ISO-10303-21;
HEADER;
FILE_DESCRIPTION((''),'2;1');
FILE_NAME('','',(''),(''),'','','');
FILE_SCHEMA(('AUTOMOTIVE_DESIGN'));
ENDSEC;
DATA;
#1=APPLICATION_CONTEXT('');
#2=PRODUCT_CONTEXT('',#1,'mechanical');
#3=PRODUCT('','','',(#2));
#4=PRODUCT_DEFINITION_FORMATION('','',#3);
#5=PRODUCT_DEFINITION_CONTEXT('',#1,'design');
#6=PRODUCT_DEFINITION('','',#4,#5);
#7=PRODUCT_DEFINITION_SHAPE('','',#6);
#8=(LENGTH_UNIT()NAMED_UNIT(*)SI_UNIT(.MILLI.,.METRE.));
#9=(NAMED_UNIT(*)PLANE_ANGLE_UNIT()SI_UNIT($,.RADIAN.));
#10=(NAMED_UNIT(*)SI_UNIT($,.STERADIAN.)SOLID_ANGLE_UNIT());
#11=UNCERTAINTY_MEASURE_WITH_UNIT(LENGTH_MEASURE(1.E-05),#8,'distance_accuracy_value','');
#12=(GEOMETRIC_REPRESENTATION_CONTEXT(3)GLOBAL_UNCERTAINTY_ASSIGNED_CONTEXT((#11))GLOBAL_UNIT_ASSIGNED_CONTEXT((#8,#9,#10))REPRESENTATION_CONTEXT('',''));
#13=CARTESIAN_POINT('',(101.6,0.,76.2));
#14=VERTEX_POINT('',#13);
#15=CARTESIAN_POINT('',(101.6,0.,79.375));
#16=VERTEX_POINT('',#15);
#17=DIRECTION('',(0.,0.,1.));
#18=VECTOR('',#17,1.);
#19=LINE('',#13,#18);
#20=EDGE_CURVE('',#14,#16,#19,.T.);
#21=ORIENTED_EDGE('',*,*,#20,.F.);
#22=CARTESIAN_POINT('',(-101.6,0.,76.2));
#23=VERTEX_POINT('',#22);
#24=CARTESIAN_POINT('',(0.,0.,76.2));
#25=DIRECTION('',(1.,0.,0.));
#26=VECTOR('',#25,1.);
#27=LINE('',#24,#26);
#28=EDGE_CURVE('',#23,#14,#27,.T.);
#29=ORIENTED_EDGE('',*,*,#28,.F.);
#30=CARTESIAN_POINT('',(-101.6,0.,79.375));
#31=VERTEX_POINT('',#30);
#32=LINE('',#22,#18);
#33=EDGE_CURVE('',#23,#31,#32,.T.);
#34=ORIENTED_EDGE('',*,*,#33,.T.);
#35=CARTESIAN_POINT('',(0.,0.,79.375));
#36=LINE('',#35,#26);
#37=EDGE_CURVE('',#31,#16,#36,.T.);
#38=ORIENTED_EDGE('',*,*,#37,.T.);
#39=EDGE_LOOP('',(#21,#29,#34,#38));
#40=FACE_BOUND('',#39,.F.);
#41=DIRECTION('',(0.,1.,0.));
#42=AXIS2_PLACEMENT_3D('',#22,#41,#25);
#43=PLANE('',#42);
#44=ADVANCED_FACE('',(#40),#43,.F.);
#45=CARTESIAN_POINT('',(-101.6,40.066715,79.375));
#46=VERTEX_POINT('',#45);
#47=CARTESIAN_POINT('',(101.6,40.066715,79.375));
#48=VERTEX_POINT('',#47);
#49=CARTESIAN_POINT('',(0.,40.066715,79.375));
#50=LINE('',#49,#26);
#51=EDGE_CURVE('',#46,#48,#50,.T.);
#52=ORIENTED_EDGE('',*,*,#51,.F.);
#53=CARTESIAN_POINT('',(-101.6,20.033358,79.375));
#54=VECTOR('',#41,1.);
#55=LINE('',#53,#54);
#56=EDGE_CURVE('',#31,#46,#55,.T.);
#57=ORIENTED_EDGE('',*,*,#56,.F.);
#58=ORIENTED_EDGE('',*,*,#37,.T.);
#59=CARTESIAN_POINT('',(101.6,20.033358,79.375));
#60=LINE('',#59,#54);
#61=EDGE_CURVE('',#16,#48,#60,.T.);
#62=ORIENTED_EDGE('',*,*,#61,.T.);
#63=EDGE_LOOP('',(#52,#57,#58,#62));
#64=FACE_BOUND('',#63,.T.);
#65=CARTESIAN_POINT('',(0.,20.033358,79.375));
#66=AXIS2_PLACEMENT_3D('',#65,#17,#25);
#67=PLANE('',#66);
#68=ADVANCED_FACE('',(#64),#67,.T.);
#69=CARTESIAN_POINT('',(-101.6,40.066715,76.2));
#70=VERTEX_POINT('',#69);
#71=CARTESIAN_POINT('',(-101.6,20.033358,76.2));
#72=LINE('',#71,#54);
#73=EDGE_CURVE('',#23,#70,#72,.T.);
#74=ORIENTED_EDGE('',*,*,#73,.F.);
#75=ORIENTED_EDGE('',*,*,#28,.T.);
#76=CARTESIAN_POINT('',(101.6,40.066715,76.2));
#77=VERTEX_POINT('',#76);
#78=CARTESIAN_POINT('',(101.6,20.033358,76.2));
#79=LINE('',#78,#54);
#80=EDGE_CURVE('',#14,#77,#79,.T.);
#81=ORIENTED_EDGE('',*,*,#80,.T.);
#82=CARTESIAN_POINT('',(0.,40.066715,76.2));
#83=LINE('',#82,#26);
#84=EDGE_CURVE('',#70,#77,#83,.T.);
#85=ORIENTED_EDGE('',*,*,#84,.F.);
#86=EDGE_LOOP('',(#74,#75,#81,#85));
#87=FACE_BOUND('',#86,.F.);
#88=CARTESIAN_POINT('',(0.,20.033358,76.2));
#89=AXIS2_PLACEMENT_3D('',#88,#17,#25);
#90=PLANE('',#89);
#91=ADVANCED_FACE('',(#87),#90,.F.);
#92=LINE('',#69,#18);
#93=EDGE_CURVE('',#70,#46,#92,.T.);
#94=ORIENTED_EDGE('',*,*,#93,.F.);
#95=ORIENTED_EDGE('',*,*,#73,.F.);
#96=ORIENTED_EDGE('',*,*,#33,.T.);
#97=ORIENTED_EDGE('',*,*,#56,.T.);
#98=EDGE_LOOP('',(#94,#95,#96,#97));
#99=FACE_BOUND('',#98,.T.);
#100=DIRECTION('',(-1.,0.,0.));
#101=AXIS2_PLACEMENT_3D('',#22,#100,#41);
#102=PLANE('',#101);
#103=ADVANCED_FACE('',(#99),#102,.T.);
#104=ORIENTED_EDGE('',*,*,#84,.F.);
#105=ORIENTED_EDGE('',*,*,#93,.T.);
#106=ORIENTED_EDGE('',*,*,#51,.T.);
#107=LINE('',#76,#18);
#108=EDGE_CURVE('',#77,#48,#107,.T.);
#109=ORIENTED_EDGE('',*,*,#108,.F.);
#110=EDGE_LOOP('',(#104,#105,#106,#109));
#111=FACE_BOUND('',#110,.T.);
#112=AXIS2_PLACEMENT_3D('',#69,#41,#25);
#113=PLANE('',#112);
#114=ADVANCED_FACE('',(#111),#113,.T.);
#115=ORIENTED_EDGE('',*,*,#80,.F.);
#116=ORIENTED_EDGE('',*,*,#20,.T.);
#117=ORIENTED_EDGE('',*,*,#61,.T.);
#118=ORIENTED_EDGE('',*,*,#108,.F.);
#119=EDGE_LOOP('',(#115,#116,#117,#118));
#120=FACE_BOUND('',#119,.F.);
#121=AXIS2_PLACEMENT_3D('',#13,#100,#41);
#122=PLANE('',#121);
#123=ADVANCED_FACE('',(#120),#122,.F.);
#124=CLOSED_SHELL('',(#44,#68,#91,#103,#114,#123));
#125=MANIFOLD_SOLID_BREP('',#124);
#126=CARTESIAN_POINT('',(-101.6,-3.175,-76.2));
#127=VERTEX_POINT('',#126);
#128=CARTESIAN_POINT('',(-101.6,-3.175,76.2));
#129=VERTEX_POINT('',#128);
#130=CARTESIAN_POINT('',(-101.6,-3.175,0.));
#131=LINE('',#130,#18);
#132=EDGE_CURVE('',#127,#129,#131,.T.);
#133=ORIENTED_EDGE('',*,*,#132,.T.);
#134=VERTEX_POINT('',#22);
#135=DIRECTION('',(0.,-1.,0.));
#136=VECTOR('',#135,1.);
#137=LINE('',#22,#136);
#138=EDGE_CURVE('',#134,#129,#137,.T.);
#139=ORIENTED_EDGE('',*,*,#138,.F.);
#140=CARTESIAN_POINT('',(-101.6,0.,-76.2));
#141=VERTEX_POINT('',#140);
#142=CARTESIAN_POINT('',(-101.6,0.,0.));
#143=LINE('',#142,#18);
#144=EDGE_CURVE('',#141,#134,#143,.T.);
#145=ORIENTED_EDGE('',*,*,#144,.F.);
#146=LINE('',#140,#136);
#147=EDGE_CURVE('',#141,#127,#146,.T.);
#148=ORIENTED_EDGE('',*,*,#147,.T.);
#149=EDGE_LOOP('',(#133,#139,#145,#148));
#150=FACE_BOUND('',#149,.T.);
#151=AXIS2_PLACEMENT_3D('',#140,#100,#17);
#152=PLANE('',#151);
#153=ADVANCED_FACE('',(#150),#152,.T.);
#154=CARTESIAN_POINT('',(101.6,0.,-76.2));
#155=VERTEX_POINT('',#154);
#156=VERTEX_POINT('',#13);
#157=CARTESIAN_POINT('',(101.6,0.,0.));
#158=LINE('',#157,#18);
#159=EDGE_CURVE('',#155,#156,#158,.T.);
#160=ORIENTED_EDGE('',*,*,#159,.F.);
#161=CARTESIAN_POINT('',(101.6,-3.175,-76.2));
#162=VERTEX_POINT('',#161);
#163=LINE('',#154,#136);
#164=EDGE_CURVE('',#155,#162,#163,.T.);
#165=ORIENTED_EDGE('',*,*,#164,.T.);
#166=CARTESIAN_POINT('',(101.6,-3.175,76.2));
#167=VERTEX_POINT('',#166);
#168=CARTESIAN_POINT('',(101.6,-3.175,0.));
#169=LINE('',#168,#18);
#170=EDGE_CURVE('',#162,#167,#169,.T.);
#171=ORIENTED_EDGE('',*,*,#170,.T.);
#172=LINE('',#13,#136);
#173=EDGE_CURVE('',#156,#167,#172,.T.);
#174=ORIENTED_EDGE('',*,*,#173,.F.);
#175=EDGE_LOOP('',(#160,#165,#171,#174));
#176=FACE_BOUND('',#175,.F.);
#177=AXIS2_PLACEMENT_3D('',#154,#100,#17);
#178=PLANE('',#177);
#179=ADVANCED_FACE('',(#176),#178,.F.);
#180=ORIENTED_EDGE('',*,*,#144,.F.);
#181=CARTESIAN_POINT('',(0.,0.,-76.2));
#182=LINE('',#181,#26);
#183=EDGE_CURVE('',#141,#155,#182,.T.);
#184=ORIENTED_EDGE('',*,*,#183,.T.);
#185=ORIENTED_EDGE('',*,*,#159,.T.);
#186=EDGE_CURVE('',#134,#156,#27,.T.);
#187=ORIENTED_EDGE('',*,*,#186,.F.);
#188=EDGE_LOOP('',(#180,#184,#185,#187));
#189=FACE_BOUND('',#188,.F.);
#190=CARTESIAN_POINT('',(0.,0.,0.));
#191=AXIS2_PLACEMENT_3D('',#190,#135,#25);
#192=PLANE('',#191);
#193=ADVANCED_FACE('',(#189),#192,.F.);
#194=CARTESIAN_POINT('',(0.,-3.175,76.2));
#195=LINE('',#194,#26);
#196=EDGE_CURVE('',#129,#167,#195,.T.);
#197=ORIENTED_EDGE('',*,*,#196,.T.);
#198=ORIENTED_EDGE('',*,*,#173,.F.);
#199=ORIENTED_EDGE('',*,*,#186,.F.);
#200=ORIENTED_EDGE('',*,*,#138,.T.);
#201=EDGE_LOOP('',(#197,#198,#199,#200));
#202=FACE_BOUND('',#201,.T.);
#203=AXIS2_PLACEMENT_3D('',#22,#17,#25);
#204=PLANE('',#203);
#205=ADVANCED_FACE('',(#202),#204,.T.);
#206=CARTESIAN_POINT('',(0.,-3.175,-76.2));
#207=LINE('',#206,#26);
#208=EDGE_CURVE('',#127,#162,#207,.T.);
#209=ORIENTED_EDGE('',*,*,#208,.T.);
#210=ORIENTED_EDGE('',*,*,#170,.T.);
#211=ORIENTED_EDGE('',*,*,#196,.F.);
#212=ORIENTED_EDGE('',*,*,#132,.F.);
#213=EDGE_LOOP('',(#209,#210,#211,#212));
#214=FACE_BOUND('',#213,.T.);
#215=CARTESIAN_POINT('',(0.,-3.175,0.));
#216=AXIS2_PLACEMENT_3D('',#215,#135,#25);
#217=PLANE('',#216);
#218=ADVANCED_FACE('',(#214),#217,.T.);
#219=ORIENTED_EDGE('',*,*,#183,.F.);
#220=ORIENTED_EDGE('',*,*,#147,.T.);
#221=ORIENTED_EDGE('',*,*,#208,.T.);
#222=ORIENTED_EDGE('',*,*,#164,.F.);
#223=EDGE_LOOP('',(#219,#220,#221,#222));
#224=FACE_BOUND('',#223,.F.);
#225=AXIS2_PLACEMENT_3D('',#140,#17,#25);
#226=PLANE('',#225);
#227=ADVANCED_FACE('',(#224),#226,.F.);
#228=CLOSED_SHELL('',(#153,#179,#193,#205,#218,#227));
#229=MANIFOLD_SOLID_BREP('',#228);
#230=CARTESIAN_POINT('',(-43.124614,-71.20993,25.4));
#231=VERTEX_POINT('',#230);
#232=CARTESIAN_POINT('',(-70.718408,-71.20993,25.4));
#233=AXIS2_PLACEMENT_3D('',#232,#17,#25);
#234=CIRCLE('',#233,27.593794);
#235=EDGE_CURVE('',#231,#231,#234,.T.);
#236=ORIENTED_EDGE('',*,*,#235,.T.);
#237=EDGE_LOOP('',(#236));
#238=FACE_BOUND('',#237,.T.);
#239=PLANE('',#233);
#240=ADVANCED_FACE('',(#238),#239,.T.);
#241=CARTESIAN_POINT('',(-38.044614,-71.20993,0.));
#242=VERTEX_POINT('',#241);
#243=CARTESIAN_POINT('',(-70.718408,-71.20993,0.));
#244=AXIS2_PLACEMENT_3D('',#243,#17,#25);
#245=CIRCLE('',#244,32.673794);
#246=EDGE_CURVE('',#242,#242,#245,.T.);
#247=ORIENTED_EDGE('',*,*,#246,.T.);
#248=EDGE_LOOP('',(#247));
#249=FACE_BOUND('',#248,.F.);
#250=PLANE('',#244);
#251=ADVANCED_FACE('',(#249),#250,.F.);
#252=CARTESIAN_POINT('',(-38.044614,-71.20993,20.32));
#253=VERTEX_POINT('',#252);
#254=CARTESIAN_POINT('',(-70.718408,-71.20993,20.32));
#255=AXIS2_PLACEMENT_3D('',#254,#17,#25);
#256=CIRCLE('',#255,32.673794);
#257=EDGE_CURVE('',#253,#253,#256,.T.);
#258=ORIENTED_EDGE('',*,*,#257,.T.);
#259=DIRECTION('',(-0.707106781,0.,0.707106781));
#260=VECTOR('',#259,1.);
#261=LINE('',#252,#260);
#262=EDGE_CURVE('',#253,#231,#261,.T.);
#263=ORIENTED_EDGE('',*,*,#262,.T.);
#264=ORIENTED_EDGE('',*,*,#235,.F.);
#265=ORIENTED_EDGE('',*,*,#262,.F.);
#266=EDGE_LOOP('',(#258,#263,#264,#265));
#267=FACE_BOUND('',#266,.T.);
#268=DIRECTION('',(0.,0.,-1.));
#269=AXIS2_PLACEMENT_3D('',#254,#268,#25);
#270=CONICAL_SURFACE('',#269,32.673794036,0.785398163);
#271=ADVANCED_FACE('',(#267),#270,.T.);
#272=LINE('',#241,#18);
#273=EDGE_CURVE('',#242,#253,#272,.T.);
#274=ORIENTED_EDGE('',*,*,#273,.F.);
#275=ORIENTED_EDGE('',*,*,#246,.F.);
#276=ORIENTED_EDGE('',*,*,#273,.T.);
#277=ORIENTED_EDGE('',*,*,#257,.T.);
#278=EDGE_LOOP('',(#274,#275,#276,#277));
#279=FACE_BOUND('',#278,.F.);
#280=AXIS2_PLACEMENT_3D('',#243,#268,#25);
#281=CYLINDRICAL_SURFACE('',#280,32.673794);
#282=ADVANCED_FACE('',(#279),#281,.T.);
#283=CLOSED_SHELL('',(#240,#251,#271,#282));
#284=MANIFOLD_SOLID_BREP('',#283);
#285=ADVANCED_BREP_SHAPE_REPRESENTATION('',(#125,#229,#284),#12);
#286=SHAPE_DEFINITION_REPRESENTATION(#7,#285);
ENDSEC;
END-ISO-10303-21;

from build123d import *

# Parameters (mm, degrees)
F0_W     = 203.2
F0_H     = 152.4
F1_DEPTH = 3.175
F2_W     = 203.2
F2_H     = 40.0667153299
F3_DEPTH = 3.175
F5_R     = 32.6737940356
F6_DEPTH = 25.4
F8_SIZE  = 5.08


# Not quite as in the source:
# - the program builds the solid bodies; features that only make, move or delete a surface that nothing else refers to are left out


with BuildPart() as f1:
    # F0 (on Front) → F1 (new body)
    with BuildSketch(Plane.XZ):
        Rectangle(F0_W, F0_H)
    extrude(amount=F1_DEPTH)


with BuildPart() as f3:
    # F2 (on face) → F3 (new body)
    with BuildSketch(Plane.XY.offset(76.2)):
        with Locations((0, 20.0333576649)):
            Rectangle(F2_W, F2_H)
    extrude(amount=F3_DEPTH)


with BuildPart() as f6:
    # F5 (on Top) → F6 (new body)
    with BuildSketch(Plane.XY):
        with Locations((-70.7184076309, -71.2099298835)):
            Circle(F5_R)
    extrude(amount=F6_DEPTH)

    # F8
    f8_edges = [f6.edges().sort_by_distance(p)[0] for p in [
        (-103.392202, -71.20993, 25.4),
    ]]
    chamfer(f8_edges, length=F8_SIZE)


solid = Compound([f1.part, f3.part, f6.part])
